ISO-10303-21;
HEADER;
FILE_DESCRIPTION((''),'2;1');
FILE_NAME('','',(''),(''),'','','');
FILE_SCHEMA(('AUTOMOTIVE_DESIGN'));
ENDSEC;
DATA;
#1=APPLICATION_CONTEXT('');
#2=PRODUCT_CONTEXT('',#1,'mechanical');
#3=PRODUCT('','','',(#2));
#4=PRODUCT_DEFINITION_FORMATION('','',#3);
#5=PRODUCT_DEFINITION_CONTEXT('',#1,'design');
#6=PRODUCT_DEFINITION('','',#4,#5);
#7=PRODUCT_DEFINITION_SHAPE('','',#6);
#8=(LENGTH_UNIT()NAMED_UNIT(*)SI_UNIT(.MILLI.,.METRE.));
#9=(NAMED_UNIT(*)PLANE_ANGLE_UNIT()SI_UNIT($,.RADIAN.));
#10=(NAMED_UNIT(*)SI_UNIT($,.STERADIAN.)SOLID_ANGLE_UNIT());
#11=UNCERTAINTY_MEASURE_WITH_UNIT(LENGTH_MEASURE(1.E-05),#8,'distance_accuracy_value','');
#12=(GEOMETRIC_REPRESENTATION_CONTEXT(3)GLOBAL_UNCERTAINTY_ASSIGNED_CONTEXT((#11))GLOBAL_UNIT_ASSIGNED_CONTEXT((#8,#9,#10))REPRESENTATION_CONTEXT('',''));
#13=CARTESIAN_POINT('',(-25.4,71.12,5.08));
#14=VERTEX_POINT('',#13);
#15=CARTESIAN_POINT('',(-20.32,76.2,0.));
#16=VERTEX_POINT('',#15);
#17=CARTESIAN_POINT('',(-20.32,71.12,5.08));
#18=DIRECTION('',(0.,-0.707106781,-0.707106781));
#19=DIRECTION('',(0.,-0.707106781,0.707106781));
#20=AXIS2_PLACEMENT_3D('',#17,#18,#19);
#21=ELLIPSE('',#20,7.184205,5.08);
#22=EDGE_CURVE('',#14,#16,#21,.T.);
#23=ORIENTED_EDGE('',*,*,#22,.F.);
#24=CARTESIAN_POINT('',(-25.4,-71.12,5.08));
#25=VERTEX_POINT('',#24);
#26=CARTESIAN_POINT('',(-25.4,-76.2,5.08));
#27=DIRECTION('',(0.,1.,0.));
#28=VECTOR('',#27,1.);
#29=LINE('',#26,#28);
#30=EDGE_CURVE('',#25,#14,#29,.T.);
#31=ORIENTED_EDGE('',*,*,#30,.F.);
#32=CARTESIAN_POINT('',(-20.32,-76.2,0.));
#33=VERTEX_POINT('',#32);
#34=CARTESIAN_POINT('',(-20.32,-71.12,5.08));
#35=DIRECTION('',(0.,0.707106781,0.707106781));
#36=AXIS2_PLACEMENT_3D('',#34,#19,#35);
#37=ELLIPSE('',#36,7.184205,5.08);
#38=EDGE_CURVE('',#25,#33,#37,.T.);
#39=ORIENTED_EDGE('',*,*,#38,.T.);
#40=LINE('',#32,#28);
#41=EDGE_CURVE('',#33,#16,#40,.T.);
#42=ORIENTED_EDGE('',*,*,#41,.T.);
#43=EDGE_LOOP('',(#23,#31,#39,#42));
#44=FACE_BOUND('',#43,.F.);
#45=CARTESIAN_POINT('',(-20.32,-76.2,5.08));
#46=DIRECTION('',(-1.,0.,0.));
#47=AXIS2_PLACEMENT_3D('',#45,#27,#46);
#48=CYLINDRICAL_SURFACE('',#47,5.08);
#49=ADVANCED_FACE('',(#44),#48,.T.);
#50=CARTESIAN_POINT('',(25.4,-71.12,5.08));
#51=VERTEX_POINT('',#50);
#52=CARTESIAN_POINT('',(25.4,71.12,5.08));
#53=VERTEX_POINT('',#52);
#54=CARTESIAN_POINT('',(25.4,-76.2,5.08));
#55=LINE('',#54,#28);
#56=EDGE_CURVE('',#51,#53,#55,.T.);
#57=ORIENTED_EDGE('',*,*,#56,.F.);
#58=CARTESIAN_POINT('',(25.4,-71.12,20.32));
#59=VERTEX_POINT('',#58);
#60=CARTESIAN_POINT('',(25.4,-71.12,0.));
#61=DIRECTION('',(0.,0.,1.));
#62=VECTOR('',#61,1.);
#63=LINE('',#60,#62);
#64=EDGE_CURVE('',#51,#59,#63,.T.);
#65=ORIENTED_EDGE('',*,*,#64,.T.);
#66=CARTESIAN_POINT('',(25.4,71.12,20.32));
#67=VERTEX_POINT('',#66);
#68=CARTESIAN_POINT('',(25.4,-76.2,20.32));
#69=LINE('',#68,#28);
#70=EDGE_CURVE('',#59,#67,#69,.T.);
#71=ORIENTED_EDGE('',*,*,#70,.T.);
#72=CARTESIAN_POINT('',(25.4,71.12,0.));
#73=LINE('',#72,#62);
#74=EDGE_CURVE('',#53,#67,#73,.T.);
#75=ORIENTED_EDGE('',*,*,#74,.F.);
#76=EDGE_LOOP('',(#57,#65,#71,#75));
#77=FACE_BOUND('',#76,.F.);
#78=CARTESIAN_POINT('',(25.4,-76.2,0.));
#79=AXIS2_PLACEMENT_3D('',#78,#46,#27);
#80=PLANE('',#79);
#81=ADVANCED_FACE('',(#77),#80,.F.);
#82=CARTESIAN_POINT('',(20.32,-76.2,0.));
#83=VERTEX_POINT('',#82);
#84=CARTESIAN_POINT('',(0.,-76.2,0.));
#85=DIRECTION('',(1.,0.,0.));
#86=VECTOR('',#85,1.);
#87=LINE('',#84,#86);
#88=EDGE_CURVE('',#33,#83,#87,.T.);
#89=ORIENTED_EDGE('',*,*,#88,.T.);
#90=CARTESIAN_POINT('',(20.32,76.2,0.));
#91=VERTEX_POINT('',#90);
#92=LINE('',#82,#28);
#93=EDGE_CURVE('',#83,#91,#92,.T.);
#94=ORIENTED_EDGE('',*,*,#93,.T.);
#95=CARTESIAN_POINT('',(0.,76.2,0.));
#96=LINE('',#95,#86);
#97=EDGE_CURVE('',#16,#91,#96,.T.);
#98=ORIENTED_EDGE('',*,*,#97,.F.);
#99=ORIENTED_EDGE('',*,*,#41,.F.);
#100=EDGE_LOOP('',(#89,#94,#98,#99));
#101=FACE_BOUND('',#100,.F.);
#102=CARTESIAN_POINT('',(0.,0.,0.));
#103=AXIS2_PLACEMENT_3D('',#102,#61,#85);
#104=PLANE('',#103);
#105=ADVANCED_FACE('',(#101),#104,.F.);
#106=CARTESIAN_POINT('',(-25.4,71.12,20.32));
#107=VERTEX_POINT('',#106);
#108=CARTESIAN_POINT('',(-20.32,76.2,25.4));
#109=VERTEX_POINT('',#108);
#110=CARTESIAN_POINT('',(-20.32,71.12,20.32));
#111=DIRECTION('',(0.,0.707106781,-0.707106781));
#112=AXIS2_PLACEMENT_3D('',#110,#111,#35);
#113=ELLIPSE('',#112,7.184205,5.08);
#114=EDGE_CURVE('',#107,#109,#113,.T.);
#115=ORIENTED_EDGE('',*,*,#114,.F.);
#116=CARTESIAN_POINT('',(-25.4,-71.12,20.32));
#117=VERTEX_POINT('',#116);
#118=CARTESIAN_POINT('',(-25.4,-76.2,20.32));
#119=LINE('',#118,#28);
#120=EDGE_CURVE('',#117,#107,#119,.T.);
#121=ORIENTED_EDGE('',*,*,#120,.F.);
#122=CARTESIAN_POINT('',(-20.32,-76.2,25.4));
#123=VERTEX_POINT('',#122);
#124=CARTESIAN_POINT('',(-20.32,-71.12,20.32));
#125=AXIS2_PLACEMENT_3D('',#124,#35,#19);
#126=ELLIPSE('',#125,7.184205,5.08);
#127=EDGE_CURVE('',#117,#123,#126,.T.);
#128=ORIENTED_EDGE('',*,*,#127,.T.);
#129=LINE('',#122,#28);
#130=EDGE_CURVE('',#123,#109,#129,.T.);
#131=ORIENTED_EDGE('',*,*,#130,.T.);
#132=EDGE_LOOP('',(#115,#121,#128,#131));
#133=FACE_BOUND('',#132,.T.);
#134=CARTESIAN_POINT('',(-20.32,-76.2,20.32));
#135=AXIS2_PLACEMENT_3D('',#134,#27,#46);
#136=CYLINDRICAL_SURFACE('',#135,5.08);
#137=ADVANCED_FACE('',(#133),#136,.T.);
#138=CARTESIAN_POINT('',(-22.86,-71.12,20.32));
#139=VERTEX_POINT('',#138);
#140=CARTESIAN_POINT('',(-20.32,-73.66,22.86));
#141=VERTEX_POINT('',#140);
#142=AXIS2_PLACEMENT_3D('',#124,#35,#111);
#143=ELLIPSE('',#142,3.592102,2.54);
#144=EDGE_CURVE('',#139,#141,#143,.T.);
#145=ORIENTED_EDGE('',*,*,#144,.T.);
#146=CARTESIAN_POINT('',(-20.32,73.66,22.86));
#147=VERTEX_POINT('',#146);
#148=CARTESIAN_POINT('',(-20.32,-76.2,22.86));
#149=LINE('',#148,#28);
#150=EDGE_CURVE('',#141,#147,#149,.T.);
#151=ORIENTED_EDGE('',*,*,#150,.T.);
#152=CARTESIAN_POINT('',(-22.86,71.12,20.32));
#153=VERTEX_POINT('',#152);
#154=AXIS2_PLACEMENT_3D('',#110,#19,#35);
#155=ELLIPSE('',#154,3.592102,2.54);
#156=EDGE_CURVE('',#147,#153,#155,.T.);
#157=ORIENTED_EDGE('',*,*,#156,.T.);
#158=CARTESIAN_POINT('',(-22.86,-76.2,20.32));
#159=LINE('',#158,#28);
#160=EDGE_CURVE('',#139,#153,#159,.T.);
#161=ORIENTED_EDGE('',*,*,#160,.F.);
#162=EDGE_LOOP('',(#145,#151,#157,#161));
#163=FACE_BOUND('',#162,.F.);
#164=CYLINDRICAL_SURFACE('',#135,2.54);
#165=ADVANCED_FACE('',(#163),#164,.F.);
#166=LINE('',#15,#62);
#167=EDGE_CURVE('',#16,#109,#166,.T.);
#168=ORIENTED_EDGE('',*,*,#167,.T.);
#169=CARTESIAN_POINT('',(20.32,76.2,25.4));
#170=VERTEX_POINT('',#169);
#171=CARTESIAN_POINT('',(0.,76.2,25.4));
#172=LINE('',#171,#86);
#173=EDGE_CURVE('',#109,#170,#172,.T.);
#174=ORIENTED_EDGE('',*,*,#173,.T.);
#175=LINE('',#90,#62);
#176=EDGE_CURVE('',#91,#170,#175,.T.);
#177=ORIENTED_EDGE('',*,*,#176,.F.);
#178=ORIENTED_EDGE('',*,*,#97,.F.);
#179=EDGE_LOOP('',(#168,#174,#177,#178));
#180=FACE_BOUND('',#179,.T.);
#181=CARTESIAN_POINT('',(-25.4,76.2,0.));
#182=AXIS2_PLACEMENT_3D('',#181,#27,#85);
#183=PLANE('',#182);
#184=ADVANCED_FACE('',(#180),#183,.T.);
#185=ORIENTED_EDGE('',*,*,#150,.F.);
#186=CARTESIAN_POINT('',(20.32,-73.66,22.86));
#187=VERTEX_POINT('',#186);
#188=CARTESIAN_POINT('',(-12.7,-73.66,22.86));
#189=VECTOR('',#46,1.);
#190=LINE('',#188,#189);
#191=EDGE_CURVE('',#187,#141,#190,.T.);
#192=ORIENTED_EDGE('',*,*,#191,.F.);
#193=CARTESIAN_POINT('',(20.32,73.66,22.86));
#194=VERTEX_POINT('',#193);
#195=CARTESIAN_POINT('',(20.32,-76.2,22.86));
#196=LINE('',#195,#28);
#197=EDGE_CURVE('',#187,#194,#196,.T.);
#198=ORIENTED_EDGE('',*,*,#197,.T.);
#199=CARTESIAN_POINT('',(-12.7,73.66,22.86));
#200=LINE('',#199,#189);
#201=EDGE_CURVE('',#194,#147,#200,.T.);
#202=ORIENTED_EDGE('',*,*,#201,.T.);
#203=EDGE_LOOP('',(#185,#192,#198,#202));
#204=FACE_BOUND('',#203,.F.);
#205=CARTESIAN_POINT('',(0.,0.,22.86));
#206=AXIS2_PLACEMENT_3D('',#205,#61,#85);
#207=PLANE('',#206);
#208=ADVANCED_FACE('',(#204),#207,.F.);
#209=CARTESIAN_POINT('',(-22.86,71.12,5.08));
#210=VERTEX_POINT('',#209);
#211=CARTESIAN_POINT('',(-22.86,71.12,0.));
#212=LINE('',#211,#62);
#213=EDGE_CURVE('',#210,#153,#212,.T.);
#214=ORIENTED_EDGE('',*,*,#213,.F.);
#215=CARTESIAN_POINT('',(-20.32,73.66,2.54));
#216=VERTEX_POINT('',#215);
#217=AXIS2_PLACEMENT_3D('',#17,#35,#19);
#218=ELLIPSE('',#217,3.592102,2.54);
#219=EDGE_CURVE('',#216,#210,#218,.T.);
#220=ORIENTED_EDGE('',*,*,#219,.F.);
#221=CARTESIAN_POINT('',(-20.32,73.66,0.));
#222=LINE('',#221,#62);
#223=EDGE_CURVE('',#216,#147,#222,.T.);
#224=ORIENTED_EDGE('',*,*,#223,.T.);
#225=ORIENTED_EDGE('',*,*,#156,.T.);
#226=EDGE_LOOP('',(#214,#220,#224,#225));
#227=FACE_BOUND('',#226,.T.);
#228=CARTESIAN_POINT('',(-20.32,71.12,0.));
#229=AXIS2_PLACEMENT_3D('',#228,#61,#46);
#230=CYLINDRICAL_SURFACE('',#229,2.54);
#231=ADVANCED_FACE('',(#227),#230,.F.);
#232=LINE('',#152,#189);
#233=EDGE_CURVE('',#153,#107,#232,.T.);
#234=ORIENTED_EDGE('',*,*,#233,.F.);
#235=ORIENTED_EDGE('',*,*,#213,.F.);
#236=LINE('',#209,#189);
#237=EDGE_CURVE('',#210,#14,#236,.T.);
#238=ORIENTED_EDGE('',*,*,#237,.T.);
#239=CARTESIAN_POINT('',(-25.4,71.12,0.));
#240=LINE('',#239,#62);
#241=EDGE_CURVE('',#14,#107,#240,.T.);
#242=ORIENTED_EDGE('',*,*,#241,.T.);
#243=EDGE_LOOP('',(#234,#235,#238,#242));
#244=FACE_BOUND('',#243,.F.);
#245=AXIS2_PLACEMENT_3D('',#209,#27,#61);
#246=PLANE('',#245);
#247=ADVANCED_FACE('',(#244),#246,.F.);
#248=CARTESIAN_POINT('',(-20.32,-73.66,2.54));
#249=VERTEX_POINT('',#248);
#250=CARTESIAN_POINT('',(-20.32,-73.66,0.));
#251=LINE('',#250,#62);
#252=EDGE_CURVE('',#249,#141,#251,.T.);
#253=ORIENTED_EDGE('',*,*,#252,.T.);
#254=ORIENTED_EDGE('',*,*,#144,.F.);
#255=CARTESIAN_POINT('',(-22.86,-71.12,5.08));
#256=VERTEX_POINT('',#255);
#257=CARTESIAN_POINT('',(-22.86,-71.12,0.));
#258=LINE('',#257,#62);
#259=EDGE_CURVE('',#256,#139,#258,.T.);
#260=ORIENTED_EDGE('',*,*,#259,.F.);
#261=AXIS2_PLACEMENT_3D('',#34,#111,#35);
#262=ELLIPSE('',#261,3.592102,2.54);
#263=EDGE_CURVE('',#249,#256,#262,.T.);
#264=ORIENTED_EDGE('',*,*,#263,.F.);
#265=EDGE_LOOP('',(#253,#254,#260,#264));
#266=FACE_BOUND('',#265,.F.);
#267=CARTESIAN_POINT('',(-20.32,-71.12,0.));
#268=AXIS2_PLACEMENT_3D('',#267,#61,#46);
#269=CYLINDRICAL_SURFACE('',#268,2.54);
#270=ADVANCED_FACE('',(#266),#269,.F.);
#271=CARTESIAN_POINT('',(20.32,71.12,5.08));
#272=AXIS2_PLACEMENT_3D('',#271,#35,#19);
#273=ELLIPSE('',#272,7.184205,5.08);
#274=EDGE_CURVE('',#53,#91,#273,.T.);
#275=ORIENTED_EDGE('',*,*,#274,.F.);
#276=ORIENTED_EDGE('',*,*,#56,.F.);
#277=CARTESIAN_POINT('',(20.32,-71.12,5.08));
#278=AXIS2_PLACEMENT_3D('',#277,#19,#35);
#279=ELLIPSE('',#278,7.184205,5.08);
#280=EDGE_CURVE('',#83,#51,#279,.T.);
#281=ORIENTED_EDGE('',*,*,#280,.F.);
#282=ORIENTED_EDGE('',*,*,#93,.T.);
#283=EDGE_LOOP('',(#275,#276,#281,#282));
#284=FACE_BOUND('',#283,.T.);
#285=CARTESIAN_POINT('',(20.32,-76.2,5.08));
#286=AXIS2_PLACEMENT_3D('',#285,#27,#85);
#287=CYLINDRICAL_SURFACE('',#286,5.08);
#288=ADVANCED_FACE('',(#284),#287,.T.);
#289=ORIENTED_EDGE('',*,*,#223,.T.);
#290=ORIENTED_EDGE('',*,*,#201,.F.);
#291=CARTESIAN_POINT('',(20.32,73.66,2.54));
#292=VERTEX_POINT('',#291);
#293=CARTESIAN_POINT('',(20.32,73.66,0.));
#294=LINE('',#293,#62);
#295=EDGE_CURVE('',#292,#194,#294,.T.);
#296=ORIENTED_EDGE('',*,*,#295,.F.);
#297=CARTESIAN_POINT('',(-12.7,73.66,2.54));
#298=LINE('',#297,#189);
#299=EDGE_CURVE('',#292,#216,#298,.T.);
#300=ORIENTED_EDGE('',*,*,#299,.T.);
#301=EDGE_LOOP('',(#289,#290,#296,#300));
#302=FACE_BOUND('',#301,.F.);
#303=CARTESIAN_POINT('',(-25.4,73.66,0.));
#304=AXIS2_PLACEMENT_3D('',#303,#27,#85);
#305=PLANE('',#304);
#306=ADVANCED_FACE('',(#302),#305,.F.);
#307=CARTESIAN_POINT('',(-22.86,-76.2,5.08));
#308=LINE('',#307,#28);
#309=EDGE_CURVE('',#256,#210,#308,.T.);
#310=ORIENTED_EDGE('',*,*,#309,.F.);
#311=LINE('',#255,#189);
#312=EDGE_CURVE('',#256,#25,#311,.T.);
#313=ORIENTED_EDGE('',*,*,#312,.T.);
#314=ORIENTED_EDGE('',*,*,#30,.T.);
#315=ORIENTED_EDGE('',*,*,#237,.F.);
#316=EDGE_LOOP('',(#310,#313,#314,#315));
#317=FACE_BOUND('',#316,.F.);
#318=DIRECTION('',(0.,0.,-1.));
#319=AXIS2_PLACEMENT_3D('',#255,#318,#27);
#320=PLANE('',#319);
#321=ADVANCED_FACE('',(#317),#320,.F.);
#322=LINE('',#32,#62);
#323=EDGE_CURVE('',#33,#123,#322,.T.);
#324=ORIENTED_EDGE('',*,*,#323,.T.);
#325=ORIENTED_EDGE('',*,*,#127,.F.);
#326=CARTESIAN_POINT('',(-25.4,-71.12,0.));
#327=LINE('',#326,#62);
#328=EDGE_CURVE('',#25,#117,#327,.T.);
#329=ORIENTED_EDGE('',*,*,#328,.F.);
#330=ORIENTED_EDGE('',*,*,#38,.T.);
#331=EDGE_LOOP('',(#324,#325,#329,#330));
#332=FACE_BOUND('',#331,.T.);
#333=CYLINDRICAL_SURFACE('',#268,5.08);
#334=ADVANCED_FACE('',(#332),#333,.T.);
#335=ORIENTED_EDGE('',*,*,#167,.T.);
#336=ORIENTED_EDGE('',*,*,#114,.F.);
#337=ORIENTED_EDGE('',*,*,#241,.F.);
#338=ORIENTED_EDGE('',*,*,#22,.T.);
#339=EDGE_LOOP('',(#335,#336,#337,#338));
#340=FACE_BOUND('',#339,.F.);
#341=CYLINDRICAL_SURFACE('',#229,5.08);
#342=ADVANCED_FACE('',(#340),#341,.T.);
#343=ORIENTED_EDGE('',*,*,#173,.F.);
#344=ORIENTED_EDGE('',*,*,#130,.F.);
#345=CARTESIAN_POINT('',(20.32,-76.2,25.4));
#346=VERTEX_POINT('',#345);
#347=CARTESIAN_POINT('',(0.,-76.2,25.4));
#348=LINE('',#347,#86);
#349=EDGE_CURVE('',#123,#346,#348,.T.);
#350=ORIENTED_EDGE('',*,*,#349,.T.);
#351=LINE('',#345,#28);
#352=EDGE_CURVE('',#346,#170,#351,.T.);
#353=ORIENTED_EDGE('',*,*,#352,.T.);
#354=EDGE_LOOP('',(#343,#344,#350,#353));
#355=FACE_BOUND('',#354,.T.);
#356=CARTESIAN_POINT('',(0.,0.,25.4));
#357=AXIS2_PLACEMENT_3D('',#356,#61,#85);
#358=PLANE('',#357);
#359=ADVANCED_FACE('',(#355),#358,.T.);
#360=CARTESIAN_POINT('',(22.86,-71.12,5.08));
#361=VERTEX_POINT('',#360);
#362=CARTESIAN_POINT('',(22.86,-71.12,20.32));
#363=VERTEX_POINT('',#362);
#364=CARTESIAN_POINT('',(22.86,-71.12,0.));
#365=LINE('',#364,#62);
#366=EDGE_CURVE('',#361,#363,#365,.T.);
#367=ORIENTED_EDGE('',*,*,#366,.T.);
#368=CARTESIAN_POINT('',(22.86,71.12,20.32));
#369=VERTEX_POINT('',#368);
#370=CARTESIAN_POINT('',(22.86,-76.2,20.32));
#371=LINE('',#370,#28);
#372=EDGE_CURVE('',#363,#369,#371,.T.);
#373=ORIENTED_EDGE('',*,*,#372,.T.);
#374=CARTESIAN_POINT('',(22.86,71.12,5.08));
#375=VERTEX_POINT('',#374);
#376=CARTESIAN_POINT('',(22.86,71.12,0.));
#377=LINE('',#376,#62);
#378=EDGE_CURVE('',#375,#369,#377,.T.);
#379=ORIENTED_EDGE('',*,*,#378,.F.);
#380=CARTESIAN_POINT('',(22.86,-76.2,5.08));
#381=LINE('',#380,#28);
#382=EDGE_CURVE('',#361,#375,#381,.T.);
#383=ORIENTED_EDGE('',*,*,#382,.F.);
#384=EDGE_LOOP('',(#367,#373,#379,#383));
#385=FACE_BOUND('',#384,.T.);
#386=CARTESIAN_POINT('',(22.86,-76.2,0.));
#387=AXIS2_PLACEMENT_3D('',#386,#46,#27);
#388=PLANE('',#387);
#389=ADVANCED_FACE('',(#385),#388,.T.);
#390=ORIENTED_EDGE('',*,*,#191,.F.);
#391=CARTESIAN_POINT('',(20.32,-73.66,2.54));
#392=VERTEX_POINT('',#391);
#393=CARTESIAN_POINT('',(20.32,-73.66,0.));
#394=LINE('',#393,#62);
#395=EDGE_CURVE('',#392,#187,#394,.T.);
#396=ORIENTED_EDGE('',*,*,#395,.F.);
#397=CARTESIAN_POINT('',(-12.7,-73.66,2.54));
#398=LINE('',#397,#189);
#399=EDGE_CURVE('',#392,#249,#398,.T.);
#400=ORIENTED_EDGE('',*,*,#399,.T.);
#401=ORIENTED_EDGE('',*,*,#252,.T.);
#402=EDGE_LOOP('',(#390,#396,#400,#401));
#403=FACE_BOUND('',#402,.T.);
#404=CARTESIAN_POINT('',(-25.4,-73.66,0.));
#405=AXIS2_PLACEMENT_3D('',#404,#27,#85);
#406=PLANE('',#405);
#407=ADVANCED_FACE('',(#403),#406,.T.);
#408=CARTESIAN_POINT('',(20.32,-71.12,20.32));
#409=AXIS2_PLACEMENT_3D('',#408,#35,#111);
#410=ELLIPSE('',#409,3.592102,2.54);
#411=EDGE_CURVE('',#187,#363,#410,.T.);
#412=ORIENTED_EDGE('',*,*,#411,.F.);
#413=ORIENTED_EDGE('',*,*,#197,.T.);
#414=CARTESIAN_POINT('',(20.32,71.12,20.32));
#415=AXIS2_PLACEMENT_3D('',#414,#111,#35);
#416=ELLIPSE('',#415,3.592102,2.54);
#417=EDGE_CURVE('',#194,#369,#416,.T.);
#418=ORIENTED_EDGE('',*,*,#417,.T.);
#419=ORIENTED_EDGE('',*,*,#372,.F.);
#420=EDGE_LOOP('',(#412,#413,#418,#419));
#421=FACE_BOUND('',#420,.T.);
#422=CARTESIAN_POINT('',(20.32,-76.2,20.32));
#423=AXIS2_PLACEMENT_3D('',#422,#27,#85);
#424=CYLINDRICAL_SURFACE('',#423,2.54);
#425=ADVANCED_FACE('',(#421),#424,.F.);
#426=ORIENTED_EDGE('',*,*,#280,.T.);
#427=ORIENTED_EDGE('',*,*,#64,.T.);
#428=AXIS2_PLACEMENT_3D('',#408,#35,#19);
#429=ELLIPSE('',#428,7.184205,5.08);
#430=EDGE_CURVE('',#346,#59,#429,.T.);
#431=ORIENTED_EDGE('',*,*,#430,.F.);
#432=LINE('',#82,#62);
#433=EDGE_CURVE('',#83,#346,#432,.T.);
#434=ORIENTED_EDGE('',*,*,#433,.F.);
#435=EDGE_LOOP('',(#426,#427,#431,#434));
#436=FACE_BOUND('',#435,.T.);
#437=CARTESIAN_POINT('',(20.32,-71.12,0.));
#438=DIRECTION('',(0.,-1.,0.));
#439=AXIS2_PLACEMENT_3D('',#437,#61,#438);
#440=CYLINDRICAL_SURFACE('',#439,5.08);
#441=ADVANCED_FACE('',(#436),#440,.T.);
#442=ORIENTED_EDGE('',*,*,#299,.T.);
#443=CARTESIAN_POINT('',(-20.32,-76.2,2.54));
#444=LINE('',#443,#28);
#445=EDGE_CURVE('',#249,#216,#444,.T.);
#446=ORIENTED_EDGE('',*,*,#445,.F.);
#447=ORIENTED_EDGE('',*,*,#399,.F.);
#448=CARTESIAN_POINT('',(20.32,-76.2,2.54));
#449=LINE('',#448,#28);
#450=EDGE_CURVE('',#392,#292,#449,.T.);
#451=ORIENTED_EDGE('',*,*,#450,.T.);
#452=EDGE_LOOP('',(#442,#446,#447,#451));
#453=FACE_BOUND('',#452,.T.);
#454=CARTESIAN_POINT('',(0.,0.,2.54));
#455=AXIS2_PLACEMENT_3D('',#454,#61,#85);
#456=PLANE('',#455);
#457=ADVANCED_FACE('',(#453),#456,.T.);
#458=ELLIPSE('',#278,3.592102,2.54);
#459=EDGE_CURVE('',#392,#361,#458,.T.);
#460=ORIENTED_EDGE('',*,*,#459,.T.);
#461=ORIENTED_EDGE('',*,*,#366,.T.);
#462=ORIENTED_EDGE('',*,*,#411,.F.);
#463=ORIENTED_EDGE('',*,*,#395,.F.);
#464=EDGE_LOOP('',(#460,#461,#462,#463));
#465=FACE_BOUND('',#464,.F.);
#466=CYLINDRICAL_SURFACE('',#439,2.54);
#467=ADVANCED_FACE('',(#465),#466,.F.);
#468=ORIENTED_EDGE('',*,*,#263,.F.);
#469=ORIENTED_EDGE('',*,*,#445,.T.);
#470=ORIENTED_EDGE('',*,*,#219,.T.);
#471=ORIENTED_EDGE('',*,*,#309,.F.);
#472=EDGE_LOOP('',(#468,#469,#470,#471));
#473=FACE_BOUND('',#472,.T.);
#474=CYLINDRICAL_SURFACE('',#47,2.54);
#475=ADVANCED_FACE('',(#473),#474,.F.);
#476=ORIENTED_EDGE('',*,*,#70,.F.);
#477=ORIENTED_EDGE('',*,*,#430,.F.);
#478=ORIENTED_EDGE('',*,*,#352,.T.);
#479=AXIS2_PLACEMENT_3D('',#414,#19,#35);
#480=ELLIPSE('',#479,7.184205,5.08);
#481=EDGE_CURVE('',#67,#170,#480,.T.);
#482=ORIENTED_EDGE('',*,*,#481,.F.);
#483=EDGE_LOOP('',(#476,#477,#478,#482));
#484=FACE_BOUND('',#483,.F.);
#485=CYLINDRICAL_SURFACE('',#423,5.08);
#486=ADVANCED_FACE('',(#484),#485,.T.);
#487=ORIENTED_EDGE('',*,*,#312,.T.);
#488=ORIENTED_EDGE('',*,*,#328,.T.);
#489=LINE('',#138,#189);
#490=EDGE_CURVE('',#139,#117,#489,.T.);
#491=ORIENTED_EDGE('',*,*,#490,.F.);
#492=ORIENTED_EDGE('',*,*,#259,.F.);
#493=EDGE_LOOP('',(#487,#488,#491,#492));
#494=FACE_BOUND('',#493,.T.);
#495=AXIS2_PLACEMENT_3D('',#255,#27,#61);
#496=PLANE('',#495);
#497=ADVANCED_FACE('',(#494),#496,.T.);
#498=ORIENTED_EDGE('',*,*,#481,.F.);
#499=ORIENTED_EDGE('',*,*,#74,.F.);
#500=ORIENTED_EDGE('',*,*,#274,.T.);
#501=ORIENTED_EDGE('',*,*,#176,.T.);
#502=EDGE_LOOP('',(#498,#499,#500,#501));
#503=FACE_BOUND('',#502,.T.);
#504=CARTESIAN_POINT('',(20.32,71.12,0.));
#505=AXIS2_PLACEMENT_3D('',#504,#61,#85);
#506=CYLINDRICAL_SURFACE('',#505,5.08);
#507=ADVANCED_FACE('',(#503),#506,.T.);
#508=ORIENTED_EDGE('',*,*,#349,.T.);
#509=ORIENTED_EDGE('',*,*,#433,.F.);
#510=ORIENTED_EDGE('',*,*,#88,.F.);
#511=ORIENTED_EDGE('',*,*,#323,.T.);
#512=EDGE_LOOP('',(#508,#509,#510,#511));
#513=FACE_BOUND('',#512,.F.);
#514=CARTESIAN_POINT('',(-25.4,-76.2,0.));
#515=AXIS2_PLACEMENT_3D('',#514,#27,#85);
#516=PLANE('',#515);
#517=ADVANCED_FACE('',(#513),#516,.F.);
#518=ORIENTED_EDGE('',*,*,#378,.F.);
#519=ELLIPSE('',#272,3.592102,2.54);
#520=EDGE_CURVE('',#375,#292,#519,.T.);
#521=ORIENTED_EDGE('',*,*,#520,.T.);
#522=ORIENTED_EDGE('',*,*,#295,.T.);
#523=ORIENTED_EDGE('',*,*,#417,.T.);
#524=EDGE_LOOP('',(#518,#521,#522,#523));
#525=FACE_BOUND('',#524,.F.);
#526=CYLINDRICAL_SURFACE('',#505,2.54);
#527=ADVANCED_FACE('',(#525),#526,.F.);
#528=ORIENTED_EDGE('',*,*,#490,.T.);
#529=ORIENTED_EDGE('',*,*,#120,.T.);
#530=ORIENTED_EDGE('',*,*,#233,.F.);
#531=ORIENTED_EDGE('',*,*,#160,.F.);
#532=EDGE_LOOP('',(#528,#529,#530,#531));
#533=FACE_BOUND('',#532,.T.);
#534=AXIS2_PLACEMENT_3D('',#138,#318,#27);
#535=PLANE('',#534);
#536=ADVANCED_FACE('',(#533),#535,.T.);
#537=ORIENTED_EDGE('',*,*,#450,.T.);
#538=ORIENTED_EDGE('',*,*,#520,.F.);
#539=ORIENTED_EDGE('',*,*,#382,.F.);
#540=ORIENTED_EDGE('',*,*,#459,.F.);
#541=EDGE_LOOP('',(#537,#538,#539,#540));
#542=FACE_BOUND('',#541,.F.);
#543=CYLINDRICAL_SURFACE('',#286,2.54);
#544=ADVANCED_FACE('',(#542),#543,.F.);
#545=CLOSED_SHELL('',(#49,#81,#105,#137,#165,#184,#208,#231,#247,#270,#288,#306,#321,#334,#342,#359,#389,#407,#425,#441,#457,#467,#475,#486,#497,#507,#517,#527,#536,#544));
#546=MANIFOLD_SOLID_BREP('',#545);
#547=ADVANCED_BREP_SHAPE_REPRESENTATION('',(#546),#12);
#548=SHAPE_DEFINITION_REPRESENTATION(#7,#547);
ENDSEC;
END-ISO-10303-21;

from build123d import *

# Parameters (mm, degrees)
F0_W     = 50.8
F0_H     = 152.4
F1_DEPTH = 25.4
F2_R     = 5.08
F3_T     = -2.54


# Not quite as in the source:
# - a shell that OpenCascade refuses in one call is made with other operations: the cavity is built on its own and cut out


with BuildPart() as f1:
    # F0 (on Top) → F1 (new body)
    with BuildSketch(Plane.XY):
        Rectangle(F0_W, F0_H)
    extrude(amount=F1_DEPTH)

    # F2
    f2_edges = [f1.edges().sort_by_distance(p)[0] for p in [
        (-25.4, 76.2, 12.7),
        (25.4, 76.2, 12.7),
        (-25.4, -76.2, 12.7),
        (25.4, -76.2, 12.7),
        (25.4, 0, 25.4),
        (25.4, 0, 0),
        (-25.4, 0, 25.4),
        (-25.4, 0, 0),
    ]]
    fillet(f2_edges, radius=F2_R)

    # F3: a shell. OpenCascade refuses it in one call, so the cavity is built on its own and cut out:
    # the body offset inwards by the wall thickness, plus a prism from it out through each open face.
    f3_core = offset(f1.part, amount=F3_T, mode=Mode.PRIVATE)
    f3_exits = [f3_core.faces().sort_by_distance(p)[0] for p in [
        (-22.86, 0, 12.7),
    ]]
    add(f3_core, mode=Mode.SUBTRACT)
    extrude(f3_exits, amount=-F3_T, mode=Mode.SUBTRACT)


solid = f1.part
